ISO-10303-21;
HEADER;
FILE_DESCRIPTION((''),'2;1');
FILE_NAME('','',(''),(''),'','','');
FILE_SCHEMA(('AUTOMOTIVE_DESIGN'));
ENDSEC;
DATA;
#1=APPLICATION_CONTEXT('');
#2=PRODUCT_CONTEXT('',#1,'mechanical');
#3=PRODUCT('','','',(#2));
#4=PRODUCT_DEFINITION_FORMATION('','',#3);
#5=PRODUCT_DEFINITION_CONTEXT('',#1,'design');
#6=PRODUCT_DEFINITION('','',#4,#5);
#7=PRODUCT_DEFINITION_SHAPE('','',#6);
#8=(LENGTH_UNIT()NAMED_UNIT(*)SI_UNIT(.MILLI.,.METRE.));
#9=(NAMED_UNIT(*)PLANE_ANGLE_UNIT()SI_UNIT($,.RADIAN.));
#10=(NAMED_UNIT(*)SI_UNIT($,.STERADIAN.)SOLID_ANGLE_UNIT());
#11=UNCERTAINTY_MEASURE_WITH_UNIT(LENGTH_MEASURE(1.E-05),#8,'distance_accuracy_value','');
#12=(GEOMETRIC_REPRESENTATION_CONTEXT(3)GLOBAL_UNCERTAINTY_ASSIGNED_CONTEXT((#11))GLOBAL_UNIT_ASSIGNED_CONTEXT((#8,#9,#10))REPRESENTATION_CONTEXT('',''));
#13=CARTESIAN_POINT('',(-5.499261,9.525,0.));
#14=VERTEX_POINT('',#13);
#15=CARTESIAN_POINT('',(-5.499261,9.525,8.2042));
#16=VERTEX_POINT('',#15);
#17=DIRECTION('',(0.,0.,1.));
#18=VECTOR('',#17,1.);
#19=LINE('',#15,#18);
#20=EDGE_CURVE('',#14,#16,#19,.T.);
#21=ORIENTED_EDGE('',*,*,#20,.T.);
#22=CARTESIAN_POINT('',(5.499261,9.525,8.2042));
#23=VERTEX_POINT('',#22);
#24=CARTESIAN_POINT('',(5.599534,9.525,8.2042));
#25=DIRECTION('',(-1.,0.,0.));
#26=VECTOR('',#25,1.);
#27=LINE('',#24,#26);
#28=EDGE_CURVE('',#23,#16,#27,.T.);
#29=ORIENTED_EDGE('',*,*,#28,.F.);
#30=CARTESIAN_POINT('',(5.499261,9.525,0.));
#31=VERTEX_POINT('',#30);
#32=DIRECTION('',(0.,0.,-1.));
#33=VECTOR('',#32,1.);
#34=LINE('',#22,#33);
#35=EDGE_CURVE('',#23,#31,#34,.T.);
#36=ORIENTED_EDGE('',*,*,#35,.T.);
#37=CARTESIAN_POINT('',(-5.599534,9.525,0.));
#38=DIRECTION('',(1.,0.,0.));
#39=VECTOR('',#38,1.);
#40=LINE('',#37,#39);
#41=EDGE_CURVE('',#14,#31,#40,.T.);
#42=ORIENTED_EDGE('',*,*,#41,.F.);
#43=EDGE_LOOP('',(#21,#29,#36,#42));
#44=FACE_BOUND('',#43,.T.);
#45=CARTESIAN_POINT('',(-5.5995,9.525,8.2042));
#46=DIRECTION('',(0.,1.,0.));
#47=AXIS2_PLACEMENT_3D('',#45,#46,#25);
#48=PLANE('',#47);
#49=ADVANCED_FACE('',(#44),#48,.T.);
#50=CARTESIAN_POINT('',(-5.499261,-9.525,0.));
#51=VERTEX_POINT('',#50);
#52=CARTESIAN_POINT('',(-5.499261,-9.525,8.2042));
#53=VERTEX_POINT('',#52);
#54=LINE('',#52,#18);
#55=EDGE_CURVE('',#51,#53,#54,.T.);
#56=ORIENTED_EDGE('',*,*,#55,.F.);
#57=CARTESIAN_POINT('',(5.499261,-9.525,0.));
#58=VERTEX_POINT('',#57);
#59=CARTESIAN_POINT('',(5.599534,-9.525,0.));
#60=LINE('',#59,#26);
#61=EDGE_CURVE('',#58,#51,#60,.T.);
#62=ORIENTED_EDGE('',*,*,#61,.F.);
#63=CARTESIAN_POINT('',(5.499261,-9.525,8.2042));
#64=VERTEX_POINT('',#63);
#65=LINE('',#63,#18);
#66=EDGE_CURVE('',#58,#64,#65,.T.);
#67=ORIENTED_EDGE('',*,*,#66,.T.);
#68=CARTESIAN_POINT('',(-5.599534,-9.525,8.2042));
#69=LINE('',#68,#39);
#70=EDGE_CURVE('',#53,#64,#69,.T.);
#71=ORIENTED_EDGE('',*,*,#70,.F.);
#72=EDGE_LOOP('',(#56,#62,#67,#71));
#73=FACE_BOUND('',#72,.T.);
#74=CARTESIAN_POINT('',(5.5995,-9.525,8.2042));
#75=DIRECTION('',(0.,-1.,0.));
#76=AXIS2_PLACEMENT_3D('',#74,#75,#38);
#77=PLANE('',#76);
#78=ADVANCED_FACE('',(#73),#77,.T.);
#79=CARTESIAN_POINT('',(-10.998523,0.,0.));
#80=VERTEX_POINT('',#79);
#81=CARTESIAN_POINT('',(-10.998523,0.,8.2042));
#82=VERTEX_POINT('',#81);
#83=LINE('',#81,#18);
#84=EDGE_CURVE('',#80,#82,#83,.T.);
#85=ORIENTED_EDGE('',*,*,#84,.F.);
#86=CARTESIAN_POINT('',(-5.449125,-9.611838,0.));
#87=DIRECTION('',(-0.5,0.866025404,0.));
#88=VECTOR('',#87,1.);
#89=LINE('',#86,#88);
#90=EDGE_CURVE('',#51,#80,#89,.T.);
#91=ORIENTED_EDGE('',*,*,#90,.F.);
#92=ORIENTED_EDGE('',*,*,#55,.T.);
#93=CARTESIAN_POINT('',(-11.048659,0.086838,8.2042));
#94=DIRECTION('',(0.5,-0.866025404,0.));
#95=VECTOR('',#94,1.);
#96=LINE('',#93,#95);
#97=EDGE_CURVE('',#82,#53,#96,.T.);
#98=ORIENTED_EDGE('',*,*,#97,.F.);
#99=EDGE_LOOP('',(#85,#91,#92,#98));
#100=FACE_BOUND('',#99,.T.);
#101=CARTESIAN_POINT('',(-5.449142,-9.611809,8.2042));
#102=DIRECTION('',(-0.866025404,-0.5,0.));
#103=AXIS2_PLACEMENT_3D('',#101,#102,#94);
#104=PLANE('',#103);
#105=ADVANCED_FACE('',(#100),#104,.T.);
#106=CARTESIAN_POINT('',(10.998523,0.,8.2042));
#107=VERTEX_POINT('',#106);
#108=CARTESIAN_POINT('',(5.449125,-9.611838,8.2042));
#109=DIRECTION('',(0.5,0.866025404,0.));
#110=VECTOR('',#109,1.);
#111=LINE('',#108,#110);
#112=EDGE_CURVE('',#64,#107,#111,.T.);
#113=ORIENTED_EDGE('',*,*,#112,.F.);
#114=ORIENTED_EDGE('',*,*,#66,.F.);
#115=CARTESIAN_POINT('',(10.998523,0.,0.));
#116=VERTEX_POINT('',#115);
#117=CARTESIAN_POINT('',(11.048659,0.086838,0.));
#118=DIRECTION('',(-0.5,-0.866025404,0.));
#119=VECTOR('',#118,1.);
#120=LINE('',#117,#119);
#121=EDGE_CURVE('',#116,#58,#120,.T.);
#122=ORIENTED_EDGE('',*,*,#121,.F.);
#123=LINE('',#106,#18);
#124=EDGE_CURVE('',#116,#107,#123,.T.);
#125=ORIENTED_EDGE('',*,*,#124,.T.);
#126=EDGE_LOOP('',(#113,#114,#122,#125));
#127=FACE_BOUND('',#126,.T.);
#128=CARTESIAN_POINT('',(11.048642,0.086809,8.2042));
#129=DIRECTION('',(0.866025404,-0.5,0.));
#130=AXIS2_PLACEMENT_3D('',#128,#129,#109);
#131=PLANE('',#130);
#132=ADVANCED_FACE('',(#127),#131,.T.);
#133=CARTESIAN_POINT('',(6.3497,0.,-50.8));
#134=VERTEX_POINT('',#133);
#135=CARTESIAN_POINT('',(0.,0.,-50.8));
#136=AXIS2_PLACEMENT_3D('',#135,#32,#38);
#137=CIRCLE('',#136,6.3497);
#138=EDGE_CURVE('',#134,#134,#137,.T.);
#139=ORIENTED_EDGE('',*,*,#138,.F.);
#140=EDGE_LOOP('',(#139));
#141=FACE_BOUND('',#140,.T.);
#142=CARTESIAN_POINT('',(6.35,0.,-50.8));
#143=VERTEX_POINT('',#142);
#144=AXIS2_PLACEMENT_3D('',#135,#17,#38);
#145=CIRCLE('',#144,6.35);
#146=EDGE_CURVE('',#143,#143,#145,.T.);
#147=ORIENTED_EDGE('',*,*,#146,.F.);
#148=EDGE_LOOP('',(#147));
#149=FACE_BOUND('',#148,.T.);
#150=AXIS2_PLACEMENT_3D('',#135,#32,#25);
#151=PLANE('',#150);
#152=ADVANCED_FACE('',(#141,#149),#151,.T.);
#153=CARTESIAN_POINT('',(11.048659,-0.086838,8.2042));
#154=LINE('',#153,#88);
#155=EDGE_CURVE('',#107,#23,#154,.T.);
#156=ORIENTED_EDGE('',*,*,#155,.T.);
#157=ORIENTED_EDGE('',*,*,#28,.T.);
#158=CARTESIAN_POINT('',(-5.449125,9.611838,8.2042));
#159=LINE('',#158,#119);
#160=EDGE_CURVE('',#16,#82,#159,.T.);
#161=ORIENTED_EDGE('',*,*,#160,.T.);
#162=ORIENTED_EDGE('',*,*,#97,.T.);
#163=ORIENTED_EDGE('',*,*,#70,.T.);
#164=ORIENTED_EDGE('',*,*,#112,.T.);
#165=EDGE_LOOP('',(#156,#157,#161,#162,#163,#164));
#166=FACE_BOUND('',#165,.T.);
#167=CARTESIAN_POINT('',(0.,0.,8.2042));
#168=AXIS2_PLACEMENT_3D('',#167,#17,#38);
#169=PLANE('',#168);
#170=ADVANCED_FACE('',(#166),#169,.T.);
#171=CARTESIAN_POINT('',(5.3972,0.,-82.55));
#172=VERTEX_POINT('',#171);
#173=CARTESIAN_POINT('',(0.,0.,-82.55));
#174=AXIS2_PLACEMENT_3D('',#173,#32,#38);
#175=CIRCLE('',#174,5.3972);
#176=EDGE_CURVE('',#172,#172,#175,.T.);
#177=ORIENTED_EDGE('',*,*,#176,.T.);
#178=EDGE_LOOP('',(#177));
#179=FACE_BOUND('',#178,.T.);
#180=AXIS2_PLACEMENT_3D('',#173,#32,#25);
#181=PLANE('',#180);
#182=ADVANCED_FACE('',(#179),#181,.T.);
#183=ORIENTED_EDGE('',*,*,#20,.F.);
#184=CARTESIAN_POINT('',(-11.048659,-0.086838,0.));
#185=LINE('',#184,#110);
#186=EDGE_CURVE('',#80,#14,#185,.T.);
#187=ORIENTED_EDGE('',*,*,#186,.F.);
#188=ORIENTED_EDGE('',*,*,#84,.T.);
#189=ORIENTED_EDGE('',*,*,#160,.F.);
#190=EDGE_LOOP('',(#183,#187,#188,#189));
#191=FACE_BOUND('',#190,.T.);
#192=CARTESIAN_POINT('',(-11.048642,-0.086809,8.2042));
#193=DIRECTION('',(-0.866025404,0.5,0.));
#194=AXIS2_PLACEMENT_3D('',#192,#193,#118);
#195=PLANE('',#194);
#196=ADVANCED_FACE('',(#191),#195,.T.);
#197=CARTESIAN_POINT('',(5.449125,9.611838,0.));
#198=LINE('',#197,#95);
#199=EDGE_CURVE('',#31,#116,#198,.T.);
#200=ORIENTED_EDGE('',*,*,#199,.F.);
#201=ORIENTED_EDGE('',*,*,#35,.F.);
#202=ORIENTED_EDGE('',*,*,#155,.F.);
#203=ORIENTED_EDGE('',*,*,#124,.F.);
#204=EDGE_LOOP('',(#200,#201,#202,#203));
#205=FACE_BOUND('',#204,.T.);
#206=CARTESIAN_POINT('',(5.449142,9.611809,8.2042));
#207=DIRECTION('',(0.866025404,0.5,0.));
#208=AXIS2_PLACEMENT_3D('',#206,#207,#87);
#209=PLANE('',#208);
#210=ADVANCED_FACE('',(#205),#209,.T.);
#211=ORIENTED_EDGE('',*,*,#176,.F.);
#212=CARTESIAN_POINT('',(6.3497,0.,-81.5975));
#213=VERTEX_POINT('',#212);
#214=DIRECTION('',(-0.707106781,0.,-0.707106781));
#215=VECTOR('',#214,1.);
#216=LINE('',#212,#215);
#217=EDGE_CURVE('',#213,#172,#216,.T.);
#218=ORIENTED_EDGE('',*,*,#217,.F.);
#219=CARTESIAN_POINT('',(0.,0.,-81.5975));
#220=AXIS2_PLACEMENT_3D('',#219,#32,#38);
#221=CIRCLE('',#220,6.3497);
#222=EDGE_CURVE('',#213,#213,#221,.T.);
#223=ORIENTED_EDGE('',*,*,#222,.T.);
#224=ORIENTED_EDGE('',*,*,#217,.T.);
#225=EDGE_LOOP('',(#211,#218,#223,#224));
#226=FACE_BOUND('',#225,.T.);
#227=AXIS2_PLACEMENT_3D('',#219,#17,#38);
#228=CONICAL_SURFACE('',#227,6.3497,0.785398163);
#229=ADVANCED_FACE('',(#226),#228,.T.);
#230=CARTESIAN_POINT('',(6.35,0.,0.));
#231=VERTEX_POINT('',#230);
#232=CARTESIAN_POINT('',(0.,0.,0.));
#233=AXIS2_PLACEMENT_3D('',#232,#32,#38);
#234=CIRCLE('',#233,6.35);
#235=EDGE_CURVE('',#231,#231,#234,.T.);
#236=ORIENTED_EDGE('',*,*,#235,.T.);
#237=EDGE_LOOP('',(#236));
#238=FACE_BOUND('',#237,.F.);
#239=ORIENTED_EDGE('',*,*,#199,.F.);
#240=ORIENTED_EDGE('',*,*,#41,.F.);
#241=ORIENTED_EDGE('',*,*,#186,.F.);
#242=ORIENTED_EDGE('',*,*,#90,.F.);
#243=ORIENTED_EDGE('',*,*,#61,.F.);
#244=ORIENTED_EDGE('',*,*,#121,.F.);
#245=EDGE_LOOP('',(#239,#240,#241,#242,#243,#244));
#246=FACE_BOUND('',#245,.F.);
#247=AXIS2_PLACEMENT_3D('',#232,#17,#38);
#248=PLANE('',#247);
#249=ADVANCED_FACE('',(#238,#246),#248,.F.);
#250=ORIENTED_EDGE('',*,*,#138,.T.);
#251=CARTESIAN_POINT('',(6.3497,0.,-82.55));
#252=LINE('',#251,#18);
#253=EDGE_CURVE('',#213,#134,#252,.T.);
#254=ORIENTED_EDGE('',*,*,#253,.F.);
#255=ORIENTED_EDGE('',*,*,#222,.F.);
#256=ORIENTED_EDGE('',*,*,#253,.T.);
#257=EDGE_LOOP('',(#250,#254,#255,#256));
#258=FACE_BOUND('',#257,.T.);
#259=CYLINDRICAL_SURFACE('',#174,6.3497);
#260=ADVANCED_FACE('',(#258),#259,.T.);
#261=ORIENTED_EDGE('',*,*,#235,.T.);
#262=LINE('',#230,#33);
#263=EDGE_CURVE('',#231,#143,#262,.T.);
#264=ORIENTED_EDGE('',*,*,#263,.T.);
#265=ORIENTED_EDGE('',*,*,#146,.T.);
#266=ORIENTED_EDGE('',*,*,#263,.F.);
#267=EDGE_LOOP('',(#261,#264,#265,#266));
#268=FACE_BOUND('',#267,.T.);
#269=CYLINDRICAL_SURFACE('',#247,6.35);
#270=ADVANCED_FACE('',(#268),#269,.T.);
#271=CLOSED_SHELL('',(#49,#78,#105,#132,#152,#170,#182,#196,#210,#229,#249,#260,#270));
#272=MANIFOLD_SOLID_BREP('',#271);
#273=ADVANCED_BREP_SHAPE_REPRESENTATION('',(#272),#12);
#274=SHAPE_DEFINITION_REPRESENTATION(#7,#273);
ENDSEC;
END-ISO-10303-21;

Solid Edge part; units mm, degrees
sketch "Sketch1" plane through (0, 0, 0) normal (0, 0, 1) x (1, 0, 0)
  circle A0 centre (0, 0) radius 11.049
  dimension "D1" = 22.098
extrude "Protrusion1" add sketch "Sketch1" along normal blind 8.2042
sketch "Sketch2" plane through (0, 0, 0) normal (0, 0, -1) x (1, 0, 0)
  circle A0 centre (0, 0) radius 6.35
extrude "Protrusion2" add sketch "Sketch2" along normal blind 82.55
sketch "Sketch3" plane through (0, 0, -82.55) normal (0, 0, -1) x (1, 0, 0)
  circle A0 centre (0, 0) radius 6.3497
extrude "Cutout1" cut sketch "Sketch3" against normal blind 31.75 flip side to cut
chamfer "Chamfer_1" distance 0.9525 angle 45 1 edges at (-6.3497, 0, -82.55)
sketch "Sketch4" plane through (0, 0, 8.2042) normal (0, 0, 1) x (1, 0, 0)
  line L0 (-5.5995, 9.525) -> (5.5995, 9.525)
  dimension "D1" = 19.05
extrude "Cutout2" cut sketch "Sketch4" against normal up to next material side at (0, 9.575, 8.2042)
pattern_circular "Pattern1" count 6 over 360 about axis through (0, 0, 8.2042) along (0, 0, 1) of "Cutout2"
properties part number "117663"
